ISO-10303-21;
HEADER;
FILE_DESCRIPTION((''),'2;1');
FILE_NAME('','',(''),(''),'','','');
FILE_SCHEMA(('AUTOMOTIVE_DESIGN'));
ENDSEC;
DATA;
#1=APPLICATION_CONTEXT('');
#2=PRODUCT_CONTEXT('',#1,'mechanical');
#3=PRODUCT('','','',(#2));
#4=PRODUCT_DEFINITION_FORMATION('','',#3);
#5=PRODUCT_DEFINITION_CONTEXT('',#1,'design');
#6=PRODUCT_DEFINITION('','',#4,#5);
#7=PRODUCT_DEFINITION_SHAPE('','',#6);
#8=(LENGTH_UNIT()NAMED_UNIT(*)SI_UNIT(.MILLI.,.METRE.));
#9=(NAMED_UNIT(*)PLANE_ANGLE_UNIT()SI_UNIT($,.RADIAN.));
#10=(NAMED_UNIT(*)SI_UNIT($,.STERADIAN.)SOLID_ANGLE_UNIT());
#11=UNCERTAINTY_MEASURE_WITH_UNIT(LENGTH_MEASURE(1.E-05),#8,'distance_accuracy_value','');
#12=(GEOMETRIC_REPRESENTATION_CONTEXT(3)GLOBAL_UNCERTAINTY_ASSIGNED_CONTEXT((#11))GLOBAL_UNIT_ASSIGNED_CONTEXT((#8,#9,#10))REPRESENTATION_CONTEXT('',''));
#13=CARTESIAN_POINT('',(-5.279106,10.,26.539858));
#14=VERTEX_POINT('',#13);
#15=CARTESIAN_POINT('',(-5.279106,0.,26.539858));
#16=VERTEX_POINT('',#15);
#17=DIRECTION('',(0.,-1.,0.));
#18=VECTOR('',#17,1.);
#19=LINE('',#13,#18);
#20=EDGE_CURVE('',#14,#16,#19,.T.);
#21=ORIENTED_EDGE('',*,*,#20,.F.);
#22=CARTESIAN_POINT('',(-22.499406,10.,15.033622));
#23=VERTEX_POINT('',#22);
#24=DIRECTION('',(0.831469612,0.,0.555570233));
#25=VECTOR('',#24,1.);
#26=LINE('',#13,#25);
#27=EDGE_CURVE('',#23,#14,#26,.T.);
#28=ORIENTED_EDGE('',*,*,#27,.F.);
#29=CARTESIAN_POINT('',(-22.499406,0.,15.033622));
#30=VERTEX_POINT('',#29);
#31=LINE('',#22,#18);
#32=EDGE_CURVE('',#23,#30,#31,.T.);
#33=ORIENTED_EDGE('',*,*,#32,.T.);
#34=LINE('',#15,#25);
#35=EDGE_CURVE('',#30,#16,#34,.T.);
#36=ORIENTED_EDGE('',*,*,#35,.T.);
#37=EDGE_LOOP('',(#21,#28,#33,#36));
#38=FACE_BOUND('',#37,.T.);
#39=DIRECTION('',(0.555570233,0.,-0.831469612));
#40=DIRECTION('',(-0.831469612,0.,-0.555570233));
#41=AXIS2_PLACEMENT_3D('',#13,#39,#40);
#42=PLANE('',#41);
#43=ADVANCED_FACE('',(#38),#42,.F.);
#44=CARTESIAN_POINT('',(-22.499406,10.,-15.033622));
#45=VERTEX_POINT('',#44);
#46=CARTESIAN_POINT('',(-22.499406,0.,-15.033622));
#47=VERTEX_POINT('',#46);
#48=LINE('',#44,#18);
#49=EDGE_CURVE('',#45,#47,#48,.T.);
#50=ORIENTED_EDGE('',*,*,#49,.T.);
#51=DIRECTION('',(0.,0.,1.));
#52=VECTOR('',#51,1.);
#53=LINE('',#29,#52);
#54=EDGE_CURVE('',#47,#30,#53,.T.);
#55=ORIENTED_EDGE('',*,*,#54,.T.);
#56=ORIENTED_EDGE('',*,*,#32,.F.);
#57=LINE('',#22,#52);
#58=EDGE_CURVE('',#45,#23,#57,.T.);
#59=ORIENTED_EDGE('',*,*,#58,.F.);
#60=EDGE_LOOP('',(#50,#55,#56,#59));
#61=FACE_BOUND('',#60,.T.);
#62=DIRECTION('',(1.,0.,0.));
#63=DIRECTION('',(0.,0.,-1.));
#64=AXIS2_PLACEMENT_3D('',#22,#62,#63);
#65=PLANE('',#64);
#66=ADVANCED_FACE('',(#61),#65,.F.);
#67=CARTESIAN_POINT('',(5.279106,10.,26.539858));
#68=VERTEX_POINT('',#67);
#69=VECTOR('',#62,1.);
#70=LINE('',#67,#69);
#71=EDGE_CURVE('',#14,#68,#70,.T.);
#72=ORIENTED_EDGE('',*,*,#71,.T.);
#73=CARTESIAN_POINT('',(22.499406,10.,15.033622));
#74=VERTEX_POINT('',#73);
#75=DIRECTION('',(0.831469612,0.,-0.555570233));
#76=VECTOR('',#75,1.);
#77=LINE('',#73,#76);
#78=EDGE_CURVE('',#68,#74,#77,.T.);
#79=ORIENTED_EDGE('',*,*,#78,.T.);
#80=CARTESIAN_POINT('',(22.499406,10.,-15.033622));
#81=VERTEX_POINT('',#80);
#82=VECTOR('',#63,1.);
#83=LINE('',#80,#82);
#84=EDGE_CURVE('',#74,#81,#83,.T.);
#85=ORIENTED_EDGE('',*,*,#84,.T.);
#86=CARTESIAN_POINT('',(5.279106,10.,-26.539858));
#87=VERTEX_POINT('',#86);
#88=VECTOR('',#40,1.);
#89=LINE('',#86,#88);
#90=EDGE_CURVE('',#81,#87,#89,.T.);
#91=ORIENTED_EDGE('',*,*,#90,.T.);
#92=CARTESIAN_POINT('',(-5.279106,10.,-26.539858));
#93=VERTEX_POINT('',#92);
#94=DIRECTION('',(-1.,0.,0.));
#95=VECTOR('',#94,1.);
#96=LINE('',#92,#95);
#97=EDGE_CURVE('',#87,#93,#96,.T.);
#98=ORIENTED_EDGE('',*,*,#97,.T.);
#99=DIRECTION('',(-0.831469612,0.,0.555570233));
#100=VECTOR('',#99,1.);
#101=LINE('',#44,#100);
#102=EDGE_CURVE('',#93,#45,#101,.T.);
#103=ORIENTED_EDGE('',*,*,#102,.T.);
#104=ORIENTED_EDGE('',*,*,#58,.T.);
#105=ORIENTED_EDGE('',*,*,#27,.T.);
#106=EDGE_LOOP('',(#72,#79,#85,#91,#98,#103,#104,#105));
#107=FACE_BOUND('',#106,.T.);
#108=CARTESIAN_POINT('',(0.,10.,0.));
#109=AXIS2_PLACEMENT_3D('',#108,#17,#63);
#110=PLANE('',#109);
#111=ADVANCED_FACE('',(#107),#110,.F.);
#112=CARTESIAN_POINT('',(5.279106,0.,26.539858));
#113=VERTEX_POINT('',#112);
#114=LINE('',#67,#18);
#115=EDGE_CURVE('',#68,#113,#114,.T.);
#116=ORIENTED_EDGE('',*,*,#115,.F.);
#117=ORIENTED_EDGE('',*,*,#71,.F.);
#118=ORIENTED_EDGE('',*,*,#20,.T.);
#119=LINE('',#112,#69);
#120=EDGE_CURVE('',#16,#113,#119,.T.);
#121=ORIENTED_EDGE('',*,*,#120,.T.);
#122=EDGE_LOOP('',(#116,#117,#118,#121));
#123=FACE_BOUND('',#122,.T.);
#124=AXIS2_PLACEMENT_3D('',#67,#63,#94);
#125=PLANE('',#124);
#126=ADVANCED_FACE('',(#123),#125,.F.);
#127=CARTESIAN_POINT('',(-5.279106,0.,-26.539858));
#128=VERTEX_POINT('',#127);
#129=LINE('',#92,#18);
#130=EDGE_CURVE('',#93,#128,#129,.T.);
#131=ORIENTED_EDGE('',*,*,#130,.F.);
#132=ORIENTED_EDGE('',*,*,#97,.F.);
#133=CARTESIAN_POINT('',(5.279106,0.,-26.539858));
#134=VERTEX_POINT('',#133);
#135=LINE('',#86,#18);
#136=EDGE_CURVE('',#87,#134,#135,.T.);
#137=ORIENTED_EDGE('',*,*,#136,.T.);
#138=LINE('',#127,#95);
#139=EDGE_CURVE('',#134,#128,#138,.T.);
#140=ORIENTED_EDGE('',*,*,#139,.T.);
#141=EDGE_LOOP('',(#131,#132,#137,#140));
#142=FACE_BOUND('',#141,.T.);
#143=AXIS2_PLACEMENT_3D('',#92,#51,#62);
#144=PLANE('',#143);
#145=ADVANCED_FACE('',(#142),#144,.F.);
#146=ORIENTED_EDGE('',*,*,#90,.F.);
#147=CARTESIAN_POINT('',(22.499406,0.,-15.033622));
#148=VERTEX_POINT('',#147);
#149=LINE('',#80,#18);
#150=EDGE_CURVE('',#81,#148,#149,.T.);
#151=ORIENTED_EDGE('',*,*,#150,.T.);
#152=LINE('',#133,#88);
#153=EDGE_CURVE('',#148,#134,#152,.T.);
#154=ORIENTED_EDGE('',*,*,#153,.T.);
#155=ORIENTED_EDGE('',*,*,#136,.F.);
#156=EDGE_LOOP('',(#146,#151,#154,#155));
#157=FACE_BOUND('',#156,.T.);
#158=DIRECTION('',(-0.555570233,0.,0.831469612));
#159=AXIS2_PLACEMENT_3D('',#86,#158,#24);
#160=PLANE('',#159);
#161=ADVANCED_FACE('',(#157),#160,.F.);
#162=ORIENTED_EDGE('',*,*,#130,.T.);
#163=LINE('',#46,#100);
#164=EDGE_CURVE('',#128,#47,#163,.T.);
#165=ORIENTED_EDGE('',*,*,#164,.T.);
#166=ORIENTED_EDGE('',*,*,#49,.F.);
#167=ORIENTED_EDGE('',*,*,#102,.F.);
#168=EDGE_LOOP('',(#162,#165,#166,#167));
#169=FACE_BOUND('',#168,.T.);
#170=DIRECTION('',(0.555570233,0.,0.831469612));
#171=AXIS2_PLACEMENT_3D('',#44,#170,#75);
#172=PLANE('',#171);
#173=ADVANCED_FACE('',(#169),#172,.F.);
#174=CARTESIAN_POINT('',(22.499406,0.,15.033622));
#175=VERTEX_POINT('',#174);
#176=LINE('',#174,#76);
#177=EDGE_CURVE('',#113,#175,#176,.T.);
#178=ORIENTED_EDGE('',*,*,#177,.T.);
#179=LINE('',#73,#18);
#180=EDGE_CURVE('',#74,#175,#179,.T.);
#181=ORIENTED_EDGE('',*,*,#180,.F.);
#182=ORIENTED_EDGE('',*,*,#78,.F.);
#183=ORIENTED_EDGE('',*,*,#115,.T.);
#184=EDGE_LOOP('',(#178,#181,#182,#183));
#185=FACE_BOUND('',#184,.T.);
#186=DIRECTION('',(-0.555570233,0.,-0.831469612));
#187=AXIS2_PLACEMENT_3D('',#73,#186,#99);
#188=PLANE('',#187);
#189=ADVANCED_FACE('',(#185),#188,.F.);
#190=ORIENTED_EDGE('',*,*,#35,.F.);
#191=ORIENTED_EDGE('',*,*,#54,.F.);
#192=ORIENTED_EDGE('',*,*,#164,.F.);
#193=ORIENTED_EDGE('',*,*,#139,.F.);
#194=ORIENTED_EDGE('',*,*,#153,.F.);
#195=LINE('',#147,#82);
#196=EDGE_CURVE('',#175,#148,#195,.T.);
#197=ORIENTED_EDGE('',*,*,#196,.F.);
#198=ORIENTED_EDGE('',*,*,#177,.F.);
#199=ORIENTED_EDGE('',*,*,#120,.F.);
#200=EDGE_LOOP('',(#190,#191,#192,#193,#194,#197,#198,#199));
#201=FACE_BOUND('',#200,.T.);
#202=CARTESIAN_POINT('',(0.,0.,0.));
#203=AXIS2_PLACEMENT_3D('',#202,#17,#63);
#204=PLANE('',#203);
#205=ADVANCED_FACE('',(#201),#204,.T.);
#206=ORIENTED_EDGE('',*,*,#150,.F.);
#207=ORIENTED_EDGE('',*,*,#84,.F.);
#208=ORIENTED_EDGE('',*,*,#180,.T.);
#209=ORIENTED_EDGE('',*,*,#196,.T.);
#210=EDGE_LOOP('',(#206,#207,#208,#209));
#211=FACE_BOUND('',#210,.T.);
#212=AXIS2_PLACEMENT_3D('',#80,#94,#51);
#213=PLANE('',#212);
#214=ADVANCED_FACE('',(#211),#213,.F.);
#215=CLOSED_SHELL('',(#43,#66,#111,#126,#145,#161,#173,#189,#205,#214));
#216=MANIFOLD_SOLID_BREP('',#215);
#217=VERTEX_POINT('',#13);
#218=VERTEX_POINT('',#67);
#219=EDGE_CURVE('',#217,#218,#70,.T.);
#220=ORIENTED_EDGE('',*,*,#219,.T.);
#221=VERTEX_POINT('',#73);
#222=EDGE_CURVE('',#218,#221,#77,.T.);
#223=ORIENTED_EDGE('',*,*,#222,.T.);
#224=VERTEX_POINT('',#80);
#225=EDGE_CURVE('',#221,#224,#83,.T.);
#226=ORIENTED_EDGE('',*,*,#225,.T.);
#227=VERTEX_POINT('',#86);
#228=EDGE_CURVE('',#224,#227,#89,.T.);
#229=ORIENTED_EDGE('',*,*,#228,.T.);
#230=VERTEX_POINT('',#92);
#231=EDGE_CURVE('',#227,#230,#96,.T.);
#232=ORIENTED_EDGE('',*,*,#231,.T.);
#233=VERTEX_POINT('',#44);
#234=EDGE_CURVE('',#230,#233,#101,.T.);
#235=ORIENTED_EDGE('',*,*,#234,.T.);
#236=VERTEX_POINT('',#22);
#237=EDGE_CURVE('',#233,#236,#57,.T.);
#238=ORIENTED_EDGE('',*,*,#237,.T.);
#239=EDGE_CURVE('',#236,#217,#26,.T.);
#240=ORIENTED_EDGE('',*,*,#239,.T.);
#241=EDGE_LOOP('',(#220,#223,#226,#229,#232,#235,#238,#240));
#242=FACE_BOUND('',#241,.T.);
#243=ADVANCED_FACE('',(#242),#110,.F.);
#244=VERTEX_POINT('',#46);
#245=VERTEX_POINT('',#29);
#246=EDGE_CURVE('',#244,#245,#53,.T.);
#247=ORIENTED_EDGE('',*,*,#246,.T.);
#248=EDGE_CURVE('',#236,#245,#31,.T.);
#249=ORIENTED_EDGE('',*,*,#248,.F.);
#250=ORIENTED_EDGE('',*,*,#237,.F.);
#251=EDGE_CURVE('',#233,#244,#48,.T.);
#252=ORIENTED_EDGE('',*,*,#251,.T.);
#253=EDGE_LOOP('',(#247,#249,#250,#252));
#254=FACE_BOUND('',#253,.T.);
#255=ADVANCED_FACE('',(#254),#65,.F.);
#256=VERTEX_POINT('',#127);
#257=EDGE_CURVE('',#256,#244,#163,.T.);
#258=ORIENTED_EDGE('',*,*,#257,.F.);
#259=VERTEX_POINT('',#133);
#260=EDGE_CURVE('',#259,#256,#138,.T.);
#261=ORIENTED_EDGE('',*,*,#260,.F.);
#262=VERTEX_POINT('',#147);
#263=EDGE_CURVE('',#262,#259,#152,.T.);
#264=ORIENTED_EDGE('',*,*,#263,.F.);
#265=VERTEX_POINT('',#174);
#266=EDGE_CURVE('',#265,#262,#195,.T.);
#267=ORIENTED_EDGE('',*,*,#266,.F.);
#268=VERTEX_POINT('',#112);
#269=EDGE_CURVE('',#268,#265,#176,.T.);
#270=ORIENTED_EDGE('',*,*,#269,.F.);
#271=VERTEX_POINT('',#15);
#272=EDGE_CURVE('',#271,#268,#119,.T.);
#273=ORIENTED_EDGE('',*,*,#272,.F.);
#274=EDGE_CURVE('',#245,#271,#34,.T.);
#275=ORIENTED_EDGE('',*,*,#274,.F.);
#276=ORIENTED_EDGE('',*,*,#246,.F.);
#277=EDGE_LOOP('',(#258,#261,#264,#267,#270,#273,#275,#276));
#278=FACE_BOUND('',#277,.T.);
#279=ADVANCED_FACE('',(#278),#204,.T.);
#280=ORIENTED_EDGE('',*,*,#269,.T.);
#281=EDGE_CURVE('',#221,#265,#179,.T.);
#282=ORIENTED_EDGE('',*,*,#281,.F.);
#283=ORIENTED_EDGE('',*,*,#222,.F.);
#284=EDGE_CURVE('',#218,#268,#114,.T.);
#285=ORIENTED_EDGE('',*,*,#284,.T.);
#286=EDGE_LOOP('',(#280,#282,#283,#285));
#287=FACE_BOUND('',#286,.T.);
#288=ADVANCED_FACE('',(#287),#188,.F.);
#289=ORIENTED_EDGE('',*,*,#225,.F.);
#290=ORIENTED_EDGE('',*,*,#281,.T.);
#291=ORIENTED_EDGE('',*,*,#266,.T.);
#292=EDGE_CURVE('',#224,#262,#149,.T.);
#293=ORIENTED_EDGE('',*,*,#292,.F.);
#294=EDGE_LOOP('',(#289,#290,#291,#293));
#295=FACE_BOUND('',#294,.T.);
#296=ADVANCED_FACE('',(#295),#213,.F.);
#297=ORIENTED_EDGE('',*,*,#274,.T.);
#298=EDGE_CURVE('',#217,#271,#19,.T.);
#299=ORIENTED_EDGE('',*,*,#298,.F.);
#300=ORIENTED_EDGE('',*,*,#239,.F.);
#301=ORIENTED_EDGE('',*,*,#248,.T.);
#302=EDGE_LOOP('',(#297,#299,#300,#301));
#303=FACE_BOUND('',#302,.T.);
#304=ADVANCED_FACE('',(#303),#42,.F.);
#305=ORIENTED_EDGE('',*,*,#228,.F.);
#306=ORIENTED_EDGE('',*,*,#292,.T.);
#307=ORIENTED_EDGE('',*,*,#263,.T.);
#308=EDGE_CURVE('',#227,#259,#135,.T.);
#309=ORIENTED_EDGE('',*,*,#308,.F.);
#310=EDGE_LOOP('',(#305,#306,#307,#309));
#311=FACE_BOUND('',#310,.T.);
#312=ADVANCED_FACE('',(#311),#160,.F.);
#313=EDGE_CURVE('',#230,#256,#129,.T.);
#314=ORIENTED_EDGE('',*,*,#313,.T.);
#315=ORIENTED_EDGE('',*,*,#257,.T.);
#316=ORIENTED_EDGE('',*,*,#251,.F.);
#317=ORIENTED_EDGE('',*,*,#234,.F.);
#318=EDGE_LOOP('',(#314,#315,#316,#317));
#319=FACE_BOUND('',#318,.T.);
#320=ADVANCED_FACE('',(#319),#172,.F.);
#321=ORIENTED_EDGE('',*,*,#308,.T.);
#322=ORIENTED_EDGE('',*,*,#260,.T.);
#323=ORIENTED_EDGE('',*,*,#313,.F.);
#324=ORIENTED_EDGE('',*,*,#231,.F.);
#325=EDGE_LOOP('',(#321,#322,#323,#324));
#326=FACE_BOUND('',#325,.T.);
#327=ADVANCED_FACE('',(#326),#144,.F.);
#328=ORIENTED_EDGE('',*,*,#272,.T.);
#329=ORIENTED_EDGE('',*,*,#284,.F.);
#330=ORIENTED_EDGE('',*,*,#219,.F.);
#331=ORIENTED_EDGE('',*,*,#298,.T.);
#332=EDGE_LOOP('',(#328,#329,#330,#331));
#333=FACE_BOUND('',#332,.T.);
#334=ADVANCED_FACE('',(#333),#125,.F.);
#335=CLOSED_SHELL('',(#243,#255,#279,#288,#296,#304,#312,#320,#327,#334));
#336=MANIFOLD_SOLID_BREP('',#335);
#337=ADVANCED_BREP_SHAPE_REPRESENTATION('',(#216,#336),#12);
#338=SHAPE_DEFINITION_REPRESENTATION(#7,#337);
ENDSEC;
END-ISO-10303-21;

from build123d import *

# Parameters (mm, degrees)
BOSS_EXTRUDE1_DEPTH   = 10
BODY_MOVE_COPY1_DEPTH = 10


# Read off the part's stored shape, not the designer's step: Body-Move/Copy1
with BuildPart() as part:
    # Sketch1 → Boss-Extrude1 (new body)
    with BuildSketch(Plane(origin=(0, 0, 0), x_dir=(1, 0, 0), z_dir=(0, 1, 0))):
        Polygon((5.279106073, 26.539858442), (22.499405578, 15.033622173), (22.499405578, -15.033622173), (5.279106073, -26.539858442), (-5.279106073, -26.539858442), (-22.499405578, -15.033622173), (-22.499405578, 15.033622173), (-5.279106073, 26.539858442), align=None)
    extrude(amount=BOSS_EXTRUDE1_DEPTH)


with BuildPart() as body_2:
    # Body-Move/Copy1 outline → Body-Move/Copy1 (new body)
    with BuildSketch(Plane(origin=(0, 0, 0), x_dir=(1, 0, 0), z_dir=(0, 1, 0))):
        Polygon((5.279106073, 26.539858442), (-5.279106073, 26.539858442), (-22.499405578, 15.033622173), (-22.499405578, -15.033622173), (-5.279106073, -26.539858442), (5.279106073, -26.539858442), (22.499405578, -15.033622173), (22.499405578, 15.033622173), align=None)
    extrude(amount=BODY_MOVE_COPY1_DEPTH)


solid = Compound([part.part, body_2.part])
